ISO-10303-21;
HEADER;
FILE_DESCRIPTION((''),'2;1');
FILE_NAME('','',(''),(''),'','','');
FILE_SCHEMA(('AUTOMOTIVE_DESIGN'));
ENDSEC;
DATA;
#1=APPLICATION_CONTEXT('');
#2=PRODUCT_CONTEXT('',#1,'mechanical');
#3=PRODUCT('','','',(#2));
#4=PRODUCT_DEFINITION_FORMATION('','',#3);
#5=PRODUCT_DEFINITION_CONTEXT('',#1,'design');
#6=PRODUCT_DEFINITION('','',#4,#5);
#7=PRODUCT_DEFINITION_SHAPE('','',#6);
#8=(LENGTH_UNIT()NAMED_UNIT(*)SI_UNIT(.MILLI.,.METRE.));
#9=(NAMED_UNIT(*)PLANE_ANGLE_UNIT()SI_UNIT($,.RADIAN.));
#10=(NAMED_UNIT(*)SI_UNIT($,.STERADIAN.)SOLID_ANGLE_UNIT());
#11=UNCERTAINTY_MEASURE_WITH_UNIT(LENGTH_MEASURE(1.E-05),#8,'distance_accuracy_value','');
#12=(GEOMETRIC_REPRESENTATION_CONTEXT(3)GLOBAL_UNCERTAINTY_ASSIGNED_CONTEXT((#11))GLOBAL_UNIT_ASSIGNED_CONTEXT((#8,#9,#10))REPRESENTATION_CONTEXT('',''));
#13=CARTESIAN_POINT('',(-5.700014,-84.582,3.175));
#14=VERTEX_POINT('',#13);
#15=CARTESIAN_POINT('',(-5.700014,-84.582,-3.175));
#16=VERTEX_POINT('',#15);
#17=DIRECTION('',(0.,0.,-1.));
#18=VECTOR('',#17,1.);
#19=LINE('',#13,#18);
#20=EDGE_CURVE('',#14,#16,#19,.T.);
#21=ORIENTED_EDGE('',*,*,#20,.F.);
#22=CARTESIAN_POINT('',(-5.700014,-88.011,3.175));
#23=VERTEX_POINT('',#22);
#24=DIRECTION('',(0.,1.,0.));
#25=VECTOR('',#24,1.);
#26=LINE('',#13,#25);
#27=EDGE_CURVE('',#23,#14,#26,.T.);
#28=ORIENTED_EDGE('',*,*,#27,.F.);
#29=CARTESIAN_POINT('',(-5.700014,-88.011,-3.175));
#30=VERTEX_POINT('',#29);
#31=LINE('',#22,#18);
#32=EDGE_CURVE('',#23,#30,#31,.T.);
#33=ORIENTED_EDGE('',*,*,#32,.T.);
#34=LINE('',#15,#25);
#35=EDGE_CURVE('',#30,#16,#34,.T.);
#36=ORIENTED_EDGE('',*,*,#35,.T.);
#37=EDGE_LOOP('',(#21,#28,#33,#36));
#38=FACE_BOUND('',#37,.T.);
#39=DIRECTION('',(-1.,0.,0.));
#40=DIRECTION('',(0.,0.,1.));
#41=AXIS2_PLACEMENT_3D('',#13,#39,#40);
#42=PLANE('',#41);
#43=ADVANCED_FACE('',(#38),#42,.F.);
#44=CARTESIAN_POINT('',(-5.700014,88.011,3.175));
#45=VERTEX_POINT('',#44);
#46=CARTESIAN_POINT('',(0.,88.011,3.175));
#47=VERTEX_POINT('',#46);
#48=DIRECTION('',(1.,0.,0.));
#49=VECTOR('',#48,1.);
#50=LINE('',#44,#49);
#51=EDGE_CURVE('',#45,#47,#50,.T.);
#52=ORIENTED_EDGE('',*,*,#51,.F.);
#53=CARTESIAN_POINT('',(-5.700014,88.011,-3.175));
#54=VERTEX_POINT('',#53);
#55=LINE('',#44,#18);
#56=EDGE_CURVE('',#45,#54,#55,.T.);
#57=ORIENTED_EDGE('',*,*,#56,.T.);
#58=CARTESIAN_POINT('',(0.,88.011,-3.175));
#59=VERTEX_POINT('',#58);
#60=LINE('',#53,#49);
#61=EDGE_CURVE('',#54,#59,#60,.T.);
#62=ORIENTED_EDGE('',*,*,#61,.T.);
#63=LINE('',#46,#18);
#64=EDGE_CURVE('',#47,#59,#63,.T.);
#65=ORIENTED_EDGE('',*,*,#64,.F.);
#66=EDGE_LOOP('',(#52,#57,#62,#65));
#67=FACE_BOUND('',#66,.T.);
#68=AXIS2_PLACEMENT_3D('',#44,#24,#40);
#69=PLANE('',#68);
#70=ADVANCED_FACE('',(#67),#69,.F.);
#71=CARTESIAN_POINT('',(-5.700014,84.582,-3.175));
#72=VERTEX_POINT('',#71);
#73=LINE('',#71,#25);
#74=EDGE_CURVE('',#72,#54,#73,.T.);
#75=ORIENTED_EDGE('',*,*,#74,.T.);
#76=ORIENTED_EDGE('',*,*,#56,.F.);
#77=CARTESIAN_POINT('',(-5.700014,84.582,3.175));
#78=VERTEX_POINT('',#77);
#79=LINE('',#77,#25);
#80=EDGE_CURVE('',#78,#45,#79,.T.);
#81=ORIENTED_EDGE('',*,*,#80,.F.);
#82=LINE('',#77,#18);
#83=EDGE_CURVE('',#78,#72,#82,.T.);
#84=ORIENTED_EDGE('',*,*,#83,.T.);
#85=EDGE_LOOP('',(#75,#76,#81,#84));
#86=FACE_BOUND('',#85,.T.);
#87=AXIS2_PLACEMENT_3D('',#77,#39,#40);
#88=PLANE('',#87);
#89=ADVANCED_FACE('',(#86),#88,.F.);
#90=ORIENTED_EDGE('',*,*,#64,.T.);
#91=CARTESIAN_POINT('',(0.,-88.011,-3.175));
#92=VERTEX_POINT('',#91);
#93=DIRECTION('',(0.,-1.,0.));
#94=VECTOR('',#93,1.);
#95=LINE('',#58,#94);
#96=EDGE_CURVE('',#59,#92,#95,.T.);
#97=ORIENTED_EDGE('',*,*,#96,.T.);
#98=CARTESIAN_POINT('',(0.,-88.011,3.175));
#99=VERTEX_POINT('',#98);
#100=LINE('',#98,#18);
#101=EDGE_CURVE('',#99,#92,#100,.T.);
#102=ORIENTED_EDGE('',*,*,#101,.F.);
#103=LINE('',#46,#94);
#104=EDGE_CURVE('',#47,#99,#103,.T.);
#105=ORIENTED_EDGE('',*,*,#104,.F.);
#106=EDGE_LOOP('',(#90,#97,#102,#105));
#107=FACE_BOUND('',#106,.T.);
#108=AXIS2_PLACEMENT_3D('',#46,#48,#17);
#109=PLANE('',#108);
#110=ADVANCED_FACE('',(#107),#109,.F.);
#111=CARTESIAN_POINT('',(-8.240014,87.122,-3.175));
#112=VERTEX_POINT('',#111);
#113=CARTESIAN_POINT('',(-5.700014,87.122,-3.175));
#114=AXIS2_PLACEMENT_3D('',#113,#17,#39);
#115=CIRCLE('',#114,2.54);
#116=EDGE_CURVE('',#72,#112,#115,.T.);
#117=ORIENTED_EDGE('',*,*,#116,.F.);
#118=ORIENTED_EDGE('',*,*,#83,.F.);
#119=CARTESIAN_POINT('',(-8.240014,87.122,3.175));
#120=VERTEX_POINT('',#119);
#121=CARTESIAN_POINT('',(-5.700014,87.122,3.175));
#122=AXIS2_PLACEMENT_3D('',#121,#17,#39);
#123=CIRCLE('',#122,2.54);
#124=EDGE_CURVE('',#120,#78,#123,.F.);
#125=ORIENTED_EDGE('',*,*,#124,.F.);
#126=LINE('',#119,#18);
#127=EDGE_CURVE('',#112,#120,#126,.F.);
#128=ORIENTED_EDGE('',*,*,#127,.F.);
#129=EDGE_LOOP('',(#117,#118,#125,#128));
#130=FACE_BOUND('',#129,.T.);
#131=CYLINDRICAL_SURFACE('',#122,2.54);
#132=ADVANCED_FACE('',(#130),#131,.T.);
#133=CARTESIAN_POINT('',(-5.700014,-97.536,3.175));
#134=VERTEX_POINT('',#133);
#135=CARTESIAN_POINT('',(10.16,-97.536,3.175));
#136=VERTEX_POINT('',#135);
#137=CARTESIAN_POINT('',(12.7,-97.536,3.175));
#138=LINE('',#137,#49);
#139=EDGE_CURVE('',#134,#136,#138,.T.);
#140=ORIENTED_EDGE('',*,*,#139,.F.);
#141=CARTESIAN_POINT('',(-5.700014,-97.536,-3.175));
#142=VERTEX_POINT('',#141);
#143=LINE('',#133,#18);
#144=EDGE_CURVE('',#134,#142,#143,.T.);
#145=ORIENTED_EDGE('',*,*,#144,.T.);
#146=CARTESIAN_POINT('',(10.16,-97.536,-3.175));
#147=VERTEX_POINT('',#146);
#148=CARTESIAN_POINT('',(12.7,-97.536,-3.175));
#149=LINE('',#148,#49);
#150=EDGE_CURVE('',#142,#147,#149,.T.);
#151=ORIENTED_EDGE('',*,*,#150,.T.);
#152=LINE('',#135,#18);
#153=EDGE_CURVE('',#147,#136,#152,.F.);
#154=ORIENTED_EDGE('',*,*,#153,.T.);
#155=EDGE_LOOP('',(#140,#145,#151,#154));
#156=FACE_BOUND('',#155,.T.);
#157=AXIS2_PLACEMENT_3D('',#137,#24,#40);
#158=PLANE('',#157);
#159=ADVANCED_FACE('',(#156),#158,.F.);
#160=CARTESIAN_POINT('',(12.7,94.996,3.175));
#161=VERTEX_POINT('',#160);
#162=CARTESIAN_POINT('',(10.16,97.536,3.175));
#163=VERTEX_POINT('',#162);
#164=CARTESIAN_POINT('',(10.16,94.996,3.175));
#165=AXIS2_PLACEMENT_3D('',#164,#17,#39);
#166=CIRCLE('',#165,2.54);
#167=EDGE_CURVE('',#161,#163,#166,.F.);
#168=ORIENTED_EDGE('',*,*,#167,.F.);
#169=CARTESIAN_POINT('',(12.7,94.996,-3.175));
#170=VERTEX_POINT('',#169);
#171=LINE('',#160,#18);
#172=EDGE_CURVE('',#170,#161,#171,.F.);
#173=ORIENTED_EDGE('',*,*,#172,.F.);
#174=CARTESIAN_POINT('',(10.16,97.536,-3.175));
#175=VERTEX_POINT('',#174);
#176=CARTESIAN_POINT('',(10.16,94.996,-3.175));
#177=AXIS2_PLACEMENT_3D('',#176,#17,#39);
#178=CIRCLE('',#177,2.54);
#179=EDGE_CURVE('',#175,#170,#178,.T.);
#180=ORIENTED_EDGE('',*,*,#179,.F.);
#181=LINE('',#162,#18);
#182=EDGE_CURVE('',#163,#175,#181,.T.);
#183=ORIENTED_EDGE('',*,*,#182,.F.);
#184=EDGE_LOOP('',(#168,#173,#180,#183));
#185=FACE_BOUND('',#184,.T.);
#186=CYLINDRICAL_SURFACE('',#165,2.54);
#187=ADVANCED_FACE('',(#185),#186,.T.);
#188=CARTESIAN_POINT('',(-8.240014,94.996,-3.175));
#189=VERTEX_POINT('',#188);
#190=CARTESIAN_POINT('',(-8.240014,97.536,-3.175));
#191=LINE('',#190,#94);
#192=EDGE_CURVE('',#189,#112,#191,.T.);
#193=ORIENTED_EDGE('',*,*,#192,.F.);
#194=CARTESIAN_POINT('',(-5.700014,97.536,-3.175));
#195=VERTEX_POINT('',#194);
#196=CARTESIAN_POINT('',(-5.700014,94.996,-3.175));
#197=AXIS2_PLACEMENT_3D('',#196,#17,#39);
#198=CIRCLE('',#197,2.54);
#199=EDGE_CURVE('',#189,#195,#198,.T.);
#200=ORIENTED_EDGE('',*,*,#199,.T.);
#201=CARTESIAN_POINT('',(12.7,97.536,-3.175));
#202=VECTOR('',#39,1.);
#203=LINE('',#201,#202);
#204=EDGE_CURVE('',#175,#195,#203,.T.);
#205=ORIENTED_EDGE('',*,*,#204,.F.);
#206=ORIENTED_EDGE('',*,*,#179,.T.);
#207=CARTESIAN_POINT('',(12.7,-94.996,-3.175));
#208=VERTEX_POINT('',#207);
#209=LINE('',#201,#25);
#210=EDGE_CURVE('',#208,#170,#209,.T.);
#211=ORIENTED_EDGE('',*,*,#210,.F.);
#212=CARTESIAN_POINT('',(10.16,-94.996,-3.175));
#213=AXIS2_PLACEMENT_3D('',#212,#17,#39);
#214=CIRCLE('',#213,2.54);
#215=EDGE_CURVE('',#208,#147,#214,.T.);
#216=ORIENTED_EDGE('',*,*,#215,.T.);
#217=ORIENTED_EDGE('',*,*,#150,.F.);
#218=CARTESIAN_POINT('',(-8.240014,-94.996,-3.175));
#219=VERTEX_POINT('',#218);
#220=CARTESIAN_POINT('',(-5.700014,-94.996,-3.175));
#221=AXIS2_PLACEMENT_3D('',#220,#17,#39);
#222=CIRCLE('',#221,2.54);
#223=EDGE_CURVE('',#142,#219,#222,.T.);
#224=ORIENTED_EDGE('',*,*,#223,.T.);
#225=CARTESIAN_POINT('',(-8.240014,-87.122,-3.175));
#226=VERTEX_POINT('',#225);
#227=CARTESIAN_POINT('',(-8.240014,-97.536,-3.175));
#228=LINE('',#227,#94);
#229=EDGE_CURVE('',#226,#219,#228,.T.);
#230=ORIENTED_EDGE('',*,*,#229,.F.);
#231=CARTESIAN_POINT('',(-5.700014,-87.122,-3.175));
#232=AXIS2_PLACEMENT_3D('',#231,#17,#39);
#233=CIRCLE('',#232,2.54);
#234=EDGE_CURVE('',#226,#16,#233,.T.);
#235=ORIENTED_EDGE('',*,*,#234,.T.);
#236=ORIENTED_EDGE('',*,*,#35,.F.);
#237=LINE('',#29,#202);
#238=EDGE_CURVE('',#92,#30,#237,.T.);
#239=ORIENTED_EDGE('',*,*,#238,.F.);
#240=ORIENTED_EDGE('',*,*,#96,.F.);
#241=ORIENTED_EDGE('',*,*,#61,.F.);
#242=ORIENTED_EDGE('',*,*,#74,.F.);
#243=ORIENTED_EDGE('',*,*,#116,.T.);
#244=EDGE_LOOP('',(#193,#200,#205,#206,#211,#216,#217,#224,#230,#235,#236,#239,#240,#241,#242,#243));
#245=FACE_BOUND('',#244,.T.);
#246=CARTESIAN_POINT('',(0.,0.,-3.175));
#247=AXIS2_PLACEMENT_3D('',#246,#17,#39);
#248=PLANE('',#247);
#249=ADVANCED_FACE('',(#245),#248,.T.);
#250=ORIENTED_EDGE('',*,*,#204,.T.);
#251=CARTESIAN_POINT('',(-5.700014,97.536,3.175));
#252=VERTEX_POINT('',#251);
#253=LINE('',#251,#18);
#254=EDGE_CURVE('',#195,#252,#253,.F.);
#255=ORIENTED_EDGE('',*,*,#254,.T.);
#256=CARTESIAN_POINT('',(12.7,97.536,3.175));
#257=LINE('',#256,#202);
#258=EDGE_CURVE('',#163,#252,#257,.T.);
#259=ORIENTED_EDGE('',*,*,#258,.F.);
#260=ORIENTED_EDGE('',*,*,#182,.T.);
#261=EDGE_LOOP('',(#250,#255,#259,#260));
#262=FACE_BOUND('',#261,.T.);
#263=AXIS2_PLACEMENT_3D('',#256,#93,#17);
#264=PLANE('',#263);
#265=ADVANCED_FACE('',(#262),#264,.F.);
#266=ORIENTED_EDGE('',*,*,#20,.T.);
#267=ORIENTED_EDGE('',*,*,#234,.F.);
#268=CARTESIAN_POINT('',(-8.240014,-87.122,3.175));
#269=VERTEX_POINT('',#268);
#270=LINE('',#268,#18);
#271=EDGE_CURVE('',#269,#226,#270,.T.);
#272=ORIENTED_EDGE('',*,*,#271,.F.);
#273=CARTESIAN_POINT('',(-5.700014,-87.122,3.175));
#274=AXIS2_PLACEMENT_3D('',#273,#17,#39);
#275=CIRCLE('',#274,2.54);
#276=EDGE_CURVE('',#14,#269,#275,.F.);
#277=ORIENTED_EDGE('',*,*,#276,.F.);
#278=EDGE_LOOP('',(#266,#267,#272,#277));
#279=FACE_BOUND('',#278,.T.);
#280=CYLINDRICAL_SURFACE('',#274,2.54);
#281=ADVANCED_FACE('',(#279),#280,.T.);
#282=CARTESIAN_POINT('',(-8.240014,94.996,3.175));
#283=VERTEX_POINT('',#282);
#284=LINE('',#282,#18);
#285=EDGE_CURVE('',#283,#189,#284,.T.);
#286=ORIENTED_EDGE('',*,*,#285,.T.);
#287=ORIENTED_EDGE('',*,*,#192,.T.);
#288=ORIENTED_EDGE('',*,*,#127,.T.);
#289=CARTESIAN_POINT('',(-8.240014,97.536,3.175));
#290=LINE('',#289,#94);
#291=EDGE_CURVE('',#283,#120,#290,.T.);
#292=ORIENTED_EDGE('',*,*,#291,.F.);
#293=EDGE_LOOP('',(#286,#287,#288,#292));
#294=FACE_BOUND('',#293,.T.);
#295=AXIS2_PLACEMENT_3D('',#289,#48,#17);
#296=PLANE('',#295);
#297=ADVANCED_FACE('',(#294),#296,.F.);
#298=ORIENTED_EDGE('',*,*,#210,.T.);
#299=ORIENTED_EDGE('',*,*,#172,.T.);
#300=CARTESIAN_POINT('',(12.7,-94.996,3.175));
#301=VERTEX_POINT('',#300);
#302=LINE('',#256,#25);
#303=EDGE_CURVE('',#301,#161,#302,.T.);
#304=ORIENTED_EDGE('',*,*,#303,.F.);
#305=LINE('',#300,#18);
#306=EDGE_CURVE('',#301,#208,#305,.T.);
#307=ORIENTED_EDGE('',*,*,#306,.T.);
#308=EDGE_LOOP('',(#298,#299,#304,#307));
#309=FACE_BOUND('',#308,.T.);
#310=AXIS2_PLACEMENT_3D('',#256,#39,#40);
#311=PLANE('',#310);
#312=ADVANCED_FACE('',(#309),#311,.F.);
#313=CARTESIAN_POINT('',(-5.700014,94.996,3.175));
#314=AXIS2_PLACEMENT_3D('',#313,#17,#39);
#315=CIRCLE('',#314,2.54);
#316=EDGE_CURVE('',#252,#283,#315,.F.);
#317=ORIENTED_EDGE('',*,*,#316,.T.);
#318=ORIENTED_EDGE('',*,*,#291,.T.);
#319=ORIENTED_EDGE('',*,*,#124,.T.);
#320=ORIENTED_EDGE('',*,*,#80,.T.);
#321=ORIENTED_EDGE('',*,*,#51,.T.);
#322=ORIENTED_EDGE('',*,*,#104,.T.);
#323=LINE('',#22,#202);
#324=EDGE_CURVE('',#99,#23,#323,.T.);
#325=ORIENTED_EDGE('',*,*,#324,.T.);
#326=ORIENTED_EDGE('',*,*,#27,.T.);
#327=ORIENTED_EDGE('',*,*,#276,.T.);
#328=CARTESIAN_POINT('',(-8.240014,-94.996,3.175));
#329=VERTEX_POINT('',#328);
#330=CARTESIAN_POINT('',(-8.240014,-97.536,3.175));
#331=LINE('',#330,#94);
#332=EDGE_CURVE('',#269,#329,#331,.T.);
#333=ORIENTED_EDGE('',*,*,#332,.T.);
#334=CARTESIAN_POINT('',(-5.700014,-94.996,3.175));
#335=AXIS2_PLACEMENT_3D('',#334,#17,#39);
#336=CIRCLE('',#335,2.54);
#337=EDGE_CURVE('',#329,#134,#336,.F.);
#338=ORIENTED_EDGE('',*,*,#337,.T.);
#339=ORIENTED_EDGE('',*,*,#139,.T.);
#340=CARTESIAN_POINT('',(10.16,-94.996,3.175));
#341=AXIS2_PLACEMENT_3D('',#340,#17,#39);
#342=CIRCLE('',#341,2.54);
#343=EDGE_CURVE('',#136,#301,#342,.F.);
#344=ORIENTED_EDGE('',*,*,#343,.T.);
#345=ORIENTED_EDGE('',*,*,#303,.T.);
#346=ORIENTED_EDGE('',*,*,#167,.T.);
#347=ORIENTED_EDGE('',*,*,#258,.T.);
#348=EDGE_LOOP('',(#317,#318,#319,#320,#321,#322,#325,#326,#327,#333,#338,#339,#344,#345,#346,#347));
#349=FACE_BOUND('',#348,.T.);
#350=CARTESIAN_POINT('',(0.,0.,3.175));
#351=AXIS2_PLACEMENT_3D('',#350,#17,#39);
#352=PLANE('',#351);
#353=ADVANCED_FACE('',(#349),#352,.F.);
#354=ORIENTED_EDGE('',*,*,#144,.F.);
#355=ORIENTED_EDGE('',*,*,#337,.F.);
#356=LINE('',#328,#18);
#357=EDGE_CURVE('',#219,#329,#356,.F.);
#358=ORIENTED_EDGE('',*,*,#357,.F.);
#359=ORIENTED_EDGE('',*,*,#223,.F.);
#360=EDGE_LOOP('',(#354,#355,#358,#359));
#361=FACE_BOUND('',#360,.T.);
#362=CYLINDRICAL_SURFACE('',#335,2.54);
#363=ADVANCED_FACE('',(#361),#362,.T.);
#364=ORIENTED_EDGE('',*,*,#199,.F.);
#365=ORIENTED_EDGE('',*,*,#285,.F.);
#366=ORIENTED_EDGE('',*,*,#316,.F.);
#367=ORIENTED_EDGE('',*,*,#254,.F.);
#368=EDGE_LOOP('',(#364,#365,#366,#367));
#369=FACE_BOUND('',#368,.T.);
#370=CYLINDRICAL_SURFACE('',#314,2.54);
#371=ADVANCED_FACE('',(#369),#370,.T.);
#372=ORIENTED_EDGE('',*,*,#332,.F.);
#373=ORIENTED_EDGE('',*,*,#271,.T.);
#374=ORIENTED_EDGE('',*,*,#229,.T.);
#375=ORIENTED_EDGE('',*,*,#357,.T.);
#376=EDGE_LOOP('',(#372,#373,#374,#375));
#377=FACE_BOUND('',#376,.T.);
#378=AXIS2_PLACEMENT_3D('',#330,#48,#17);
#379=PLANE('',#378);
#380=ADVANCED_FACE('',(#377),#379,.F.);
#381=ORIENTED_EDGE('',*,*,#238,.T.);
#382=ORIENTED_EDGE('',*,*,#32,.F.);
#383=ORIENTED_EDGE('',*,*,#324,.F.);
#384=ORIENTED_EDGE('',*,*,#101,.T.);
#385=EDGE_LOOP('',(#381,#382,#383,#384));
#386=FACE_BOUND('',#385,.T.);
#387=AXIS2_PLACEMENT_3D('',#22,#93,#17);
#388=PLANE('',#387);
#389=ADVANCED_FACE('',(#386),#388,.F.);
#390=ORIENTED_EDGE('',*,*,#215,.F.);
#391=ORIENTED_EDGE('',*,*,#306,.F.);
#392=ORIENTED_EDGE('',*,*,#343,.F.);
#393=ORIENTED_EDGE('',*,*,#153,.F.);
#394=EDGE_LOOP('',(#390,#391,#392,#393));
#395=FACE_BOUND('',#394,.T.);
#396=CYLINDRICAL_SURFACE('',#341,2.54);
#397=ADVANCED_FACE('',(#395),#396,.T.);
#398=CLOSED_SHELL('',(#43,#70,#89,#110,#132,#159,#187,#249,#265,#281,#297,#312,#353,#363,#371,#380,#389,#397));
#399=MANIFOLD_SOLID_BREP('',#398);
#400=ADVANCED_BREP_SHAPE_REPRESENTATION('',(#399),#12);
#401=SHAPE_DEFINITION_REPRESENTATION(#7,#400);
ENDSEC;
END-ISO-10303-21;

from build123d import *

# Parameters (mm, degrees)
BOSS_EXTRUDE1_DEPTH = 3.175
FILLET1_R           = 2.54


with BuildPart() as part:
    # Sketch1 → Boss-Extrude1 (new, symmetric)
    with BuildSketch(Plane.XY):
        Polygon((-8.240014, 97.536), (-8.240014, 84.582), (-5.700014, 84.582), (-5.700014, 88.011), (0, 88.011), (0, -88.011), (-5.700014, -88.011), (-5.700014, -84.582), (-8.240014, -84.582), (-8.240014, -97.536), (12.7, -97.536), (12.7, 97.536), align=None)
    extrude(amount=BOSS_EXTRUDE1_DEPTH, both=True)

    # Fillet1
    fillet1_edges = [part.edges().sort_by_distance(p)[0] for p in [
        (12.7, -97.536, 0),
        (-8.240014, -97.536, 0),
        (-8.240014, -84.582, 0),
        (12.7, 97.536, 0),
        (-8.240014, 84.582, 0),
        (-8.240014, 97.536, 0),
    ]]
    fillet(fillet1_edges, radius=FILLET1_R - 0.0001)  # a hair under: the kernel refuses the full size


solid = part.part
